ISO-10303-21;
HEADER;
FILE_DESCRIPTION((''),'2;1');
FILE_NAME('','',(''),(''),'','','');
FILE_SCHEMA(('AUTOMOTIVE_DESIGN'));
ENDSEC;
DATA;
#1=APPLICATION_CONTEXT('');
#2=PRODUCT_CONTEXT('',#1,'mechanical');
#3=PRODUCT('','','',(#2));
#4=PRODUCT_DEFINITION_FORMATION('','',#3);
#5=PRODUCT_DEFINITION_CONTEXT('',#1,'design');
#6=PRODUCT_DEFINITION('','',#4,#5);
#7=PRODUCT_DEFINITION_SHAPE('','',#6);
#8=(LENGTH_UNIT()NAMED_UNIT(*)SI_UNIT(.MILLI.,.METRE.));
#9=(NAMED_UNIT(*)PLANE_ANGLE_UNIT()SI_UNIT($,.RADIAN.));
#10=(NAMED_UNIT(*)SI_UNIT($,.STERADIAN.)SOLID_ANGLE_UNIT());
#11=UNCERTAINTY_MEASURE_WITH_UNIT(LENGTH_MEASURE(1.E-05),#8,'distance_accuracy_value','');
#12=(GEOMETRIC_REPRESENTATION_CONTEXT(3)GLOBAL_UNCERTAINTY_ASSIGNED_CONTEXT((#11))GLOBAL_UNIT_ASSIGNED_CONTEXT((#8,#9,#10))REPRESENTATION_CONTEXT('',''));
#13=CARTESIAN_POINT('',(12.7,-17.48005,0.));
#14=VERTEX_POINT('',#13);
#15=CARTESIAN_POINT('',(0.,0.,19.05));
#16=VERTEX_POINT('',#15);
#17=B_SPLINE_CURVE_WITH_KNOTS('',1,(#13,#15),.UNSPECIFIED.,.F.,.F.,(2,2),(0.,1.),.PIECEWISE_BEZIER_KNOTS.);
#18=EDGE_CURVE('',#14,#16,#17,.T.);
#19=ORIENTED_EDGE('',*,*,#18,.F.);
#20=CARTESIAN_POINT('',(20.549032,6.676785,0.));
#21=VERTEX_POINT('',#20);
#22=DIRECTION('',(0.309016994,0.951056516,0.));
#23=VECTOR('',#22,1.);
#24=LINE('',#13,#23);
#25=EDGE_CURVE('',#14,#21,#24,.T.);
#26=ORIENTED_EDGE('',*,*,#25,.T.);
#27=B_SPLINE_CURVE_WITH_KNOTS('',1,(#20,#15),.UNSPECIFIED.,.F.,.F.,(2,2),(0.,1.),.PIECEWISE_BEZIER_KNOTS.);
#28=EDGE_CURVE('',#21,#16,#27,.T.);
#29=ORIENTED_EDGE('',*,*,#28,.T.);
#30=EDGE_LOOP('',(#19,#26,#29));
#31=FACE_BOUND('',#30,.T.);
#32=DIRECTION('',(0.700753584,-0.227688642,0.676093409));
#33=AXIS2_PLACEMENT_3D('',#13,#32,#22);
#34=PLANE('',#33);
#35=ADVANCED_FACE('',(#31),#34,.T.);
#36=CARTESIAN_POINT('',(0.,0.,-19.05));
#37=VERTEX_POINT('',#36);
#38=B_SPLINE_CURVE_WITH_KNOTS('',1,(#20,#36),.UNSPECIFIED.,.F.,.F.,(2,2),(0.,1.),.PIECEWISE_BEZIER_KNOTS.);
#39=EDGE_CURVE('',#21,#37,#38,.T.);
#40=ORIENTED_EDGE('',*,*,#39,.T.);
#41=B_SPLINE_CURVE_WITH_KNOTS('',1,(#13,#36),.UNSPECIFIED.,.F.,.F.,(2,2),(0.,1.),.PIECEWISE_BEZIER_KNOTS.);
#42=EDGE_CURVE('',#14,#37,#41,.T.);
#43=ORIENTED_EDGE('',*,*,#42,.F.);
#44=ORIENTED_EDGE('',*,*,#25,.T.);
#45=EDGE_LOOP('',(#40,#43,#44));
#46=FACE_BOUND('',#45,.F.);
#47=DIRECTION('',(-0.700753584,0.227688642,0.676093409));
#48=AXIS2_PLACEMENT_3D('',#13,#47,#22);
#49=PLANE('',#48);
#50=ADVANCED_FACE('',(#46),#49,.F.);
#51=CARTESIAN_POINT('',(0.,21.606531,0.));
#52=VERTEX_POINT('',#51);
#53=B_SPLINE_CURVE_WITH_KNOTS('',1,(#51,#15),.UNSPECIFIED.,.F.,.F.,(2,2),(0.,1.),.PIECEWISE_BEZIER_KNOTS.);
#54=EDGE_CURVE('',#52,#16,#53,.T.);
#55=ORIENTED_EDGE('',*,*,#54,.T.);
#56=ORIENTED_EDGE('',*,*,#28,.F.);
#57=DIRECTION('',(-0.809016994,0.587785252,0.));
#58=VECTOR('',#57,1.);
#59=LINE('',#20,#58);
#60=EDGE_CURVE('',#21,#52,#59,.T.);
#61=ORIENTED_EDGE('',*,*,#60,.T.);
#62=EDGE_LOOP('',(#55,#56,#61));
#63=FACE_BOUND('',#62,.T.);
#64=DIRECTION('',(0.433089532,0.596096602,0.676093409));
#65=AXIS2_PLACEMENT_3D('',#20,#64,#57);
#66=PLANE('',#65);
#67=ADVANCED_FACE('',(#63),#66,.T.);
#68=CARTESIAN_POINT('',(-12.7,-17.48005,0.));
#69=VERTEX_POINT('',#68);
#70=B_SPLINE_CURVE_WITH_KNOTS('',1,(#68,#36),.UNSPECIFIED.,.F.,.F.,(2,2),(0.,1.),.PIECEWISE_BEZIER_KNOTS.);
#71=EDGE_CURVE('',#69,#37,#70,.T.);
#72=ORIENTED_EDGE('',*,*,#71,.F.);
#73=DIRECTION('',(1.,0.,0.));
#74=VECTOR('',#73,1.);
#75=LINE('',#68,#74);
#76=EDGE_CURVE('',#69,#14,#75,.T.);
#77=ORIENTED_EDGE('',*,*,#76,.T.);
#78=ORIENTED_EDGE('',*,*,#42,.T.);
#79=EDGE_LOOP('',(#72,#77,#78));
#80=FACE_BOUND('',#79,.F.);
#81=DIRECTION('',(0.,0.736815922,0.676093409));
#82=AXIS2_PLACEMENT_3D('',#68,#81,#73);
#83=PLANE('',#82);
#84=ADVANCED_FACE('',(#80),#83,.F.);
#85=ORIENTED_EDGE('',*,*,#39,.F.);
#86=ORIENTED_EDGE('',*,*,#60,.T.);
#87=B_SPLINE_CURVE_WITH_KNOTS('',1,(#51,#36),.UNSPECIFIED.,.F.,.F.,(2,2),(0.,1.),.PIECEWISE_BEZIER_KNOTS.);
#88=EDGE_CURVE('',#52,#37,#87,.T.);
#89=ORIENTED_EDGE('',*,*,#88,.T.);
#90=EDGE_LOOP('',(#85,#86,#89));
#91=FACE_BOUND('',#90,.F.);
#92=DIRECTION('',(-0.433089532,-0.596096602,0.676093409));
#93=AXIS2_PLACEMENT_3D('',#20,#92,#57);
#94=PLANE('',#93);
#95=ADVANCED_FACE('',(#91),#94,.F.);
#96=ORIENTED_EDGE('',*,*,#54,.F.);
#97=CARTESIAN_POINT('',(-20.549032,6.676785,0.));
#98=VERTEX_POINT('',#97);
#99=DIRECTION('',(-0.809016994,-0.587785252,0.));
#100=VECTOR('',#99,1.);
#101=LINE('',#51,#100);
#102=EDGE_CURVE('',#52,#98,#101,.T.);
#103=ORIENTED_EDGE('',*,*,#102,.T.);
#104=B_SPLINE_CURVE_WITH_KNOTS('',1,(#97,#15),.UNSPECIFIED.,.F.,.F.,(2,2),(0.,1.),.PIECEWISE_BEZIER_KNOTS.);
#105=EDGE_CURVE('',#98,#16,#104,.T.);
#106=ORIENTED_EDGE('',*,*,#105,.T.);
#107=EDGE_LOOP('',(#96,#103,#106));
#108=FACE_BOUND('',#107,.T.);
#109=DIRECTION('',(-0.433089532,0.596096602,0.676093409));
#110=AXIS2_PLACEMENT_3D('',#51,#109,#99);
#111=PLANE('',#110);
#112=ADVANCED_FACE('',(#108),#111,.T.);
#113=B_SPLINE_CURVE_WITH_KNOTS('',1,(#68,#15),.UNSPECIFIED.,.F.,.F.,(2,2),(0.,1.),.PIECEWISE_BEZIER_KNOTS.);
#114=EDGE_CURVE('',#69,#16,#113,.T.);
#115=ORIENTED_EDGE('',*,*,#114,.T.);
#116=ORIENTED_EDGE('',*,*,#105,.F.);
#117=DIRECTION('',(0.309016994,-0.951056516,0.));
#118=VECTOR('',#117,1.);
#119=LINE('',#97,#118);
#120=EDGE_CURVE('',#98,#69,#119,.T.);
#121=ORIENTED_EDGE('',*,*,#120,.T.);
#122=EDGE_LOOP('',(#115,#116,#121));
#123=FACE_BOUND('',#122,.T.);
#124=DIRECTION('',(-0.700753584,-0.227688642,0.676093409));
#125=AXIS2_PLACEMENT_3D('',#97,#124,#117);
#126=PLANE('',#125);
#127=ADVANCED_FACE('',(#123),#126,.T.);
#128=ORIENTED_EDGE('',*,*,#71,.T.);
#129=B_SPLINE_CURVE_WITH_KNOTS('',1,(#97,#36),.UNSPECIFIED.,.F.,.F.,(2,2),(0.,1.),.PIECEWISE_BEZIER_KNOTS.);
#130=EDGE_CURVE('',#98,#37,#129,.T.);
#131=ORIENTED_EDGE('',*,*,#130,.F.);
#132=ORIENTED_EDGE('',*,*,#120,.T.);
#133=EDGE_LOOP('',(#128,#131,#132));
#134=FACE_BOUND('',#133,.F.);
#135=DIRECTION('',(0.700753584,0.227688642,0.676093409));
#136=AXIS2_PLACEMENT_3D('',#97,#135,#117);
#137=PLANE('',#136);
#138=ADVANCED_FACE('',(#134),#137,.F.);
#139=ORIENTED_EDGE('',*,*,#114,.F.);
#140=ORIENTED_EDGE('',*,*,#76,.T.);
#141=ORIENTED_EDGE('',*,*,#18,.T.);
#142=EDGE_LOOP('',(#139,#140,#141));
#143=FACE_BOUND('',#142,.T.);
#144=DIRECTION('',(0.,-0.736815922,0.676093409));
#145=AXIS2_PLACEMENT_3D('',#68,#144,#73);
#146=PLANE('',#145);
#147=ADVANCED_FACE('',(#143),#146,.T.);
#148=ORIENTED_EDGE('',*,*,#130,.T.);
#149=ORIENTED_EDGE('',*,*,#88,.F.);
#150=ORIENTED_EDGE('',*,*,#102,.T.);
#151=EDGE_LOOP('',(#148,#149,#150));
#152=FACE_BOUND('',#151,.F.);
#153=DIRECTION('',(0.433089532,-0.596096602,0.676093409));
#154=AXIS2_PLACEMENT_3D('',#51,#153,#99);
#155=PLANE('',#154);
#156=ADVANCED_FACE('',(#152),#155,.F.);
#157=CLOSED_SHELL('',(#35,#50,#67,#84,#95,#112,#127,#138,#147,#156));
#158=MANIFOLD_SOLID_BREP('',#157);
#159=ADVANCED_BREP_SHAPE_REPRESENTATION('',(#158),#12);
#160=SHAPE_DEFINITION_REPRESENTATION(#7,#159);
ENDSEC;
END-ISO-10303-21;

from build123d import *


with BuildPart() as f2:
    # F0 (on Top) → F2 section 0
    with BuildSketch(Plane.XY, mode=Mode.PRIVATE) as f2_s0:
        Polygon((12.7, -17.48005039), (20.5490316571, 6.6767851239), (0, 21.6065305321), (-20.5490316571, 6.6767851239), (-12.7, -17.48005039), align=None)
    loft([f2_s0.sketch, Vertex(0, 0, 19.05)])

    # F0 (on Top) → F3 section 0
    with BuildSketch(Plane.XY, mode=Mode.PRIVATE) as f3_s0:
        Polygon((12.7, -17.48005039), (20.5490316571, 6.6767851239), (0, 21.6065305321), (-20.5490316571, 6.6767851239), (-12.7, -17.48005039), align=None)
    loft([f3_s0.sketch, Vertex(0, 0, -19.05)])


solid = f2.part
